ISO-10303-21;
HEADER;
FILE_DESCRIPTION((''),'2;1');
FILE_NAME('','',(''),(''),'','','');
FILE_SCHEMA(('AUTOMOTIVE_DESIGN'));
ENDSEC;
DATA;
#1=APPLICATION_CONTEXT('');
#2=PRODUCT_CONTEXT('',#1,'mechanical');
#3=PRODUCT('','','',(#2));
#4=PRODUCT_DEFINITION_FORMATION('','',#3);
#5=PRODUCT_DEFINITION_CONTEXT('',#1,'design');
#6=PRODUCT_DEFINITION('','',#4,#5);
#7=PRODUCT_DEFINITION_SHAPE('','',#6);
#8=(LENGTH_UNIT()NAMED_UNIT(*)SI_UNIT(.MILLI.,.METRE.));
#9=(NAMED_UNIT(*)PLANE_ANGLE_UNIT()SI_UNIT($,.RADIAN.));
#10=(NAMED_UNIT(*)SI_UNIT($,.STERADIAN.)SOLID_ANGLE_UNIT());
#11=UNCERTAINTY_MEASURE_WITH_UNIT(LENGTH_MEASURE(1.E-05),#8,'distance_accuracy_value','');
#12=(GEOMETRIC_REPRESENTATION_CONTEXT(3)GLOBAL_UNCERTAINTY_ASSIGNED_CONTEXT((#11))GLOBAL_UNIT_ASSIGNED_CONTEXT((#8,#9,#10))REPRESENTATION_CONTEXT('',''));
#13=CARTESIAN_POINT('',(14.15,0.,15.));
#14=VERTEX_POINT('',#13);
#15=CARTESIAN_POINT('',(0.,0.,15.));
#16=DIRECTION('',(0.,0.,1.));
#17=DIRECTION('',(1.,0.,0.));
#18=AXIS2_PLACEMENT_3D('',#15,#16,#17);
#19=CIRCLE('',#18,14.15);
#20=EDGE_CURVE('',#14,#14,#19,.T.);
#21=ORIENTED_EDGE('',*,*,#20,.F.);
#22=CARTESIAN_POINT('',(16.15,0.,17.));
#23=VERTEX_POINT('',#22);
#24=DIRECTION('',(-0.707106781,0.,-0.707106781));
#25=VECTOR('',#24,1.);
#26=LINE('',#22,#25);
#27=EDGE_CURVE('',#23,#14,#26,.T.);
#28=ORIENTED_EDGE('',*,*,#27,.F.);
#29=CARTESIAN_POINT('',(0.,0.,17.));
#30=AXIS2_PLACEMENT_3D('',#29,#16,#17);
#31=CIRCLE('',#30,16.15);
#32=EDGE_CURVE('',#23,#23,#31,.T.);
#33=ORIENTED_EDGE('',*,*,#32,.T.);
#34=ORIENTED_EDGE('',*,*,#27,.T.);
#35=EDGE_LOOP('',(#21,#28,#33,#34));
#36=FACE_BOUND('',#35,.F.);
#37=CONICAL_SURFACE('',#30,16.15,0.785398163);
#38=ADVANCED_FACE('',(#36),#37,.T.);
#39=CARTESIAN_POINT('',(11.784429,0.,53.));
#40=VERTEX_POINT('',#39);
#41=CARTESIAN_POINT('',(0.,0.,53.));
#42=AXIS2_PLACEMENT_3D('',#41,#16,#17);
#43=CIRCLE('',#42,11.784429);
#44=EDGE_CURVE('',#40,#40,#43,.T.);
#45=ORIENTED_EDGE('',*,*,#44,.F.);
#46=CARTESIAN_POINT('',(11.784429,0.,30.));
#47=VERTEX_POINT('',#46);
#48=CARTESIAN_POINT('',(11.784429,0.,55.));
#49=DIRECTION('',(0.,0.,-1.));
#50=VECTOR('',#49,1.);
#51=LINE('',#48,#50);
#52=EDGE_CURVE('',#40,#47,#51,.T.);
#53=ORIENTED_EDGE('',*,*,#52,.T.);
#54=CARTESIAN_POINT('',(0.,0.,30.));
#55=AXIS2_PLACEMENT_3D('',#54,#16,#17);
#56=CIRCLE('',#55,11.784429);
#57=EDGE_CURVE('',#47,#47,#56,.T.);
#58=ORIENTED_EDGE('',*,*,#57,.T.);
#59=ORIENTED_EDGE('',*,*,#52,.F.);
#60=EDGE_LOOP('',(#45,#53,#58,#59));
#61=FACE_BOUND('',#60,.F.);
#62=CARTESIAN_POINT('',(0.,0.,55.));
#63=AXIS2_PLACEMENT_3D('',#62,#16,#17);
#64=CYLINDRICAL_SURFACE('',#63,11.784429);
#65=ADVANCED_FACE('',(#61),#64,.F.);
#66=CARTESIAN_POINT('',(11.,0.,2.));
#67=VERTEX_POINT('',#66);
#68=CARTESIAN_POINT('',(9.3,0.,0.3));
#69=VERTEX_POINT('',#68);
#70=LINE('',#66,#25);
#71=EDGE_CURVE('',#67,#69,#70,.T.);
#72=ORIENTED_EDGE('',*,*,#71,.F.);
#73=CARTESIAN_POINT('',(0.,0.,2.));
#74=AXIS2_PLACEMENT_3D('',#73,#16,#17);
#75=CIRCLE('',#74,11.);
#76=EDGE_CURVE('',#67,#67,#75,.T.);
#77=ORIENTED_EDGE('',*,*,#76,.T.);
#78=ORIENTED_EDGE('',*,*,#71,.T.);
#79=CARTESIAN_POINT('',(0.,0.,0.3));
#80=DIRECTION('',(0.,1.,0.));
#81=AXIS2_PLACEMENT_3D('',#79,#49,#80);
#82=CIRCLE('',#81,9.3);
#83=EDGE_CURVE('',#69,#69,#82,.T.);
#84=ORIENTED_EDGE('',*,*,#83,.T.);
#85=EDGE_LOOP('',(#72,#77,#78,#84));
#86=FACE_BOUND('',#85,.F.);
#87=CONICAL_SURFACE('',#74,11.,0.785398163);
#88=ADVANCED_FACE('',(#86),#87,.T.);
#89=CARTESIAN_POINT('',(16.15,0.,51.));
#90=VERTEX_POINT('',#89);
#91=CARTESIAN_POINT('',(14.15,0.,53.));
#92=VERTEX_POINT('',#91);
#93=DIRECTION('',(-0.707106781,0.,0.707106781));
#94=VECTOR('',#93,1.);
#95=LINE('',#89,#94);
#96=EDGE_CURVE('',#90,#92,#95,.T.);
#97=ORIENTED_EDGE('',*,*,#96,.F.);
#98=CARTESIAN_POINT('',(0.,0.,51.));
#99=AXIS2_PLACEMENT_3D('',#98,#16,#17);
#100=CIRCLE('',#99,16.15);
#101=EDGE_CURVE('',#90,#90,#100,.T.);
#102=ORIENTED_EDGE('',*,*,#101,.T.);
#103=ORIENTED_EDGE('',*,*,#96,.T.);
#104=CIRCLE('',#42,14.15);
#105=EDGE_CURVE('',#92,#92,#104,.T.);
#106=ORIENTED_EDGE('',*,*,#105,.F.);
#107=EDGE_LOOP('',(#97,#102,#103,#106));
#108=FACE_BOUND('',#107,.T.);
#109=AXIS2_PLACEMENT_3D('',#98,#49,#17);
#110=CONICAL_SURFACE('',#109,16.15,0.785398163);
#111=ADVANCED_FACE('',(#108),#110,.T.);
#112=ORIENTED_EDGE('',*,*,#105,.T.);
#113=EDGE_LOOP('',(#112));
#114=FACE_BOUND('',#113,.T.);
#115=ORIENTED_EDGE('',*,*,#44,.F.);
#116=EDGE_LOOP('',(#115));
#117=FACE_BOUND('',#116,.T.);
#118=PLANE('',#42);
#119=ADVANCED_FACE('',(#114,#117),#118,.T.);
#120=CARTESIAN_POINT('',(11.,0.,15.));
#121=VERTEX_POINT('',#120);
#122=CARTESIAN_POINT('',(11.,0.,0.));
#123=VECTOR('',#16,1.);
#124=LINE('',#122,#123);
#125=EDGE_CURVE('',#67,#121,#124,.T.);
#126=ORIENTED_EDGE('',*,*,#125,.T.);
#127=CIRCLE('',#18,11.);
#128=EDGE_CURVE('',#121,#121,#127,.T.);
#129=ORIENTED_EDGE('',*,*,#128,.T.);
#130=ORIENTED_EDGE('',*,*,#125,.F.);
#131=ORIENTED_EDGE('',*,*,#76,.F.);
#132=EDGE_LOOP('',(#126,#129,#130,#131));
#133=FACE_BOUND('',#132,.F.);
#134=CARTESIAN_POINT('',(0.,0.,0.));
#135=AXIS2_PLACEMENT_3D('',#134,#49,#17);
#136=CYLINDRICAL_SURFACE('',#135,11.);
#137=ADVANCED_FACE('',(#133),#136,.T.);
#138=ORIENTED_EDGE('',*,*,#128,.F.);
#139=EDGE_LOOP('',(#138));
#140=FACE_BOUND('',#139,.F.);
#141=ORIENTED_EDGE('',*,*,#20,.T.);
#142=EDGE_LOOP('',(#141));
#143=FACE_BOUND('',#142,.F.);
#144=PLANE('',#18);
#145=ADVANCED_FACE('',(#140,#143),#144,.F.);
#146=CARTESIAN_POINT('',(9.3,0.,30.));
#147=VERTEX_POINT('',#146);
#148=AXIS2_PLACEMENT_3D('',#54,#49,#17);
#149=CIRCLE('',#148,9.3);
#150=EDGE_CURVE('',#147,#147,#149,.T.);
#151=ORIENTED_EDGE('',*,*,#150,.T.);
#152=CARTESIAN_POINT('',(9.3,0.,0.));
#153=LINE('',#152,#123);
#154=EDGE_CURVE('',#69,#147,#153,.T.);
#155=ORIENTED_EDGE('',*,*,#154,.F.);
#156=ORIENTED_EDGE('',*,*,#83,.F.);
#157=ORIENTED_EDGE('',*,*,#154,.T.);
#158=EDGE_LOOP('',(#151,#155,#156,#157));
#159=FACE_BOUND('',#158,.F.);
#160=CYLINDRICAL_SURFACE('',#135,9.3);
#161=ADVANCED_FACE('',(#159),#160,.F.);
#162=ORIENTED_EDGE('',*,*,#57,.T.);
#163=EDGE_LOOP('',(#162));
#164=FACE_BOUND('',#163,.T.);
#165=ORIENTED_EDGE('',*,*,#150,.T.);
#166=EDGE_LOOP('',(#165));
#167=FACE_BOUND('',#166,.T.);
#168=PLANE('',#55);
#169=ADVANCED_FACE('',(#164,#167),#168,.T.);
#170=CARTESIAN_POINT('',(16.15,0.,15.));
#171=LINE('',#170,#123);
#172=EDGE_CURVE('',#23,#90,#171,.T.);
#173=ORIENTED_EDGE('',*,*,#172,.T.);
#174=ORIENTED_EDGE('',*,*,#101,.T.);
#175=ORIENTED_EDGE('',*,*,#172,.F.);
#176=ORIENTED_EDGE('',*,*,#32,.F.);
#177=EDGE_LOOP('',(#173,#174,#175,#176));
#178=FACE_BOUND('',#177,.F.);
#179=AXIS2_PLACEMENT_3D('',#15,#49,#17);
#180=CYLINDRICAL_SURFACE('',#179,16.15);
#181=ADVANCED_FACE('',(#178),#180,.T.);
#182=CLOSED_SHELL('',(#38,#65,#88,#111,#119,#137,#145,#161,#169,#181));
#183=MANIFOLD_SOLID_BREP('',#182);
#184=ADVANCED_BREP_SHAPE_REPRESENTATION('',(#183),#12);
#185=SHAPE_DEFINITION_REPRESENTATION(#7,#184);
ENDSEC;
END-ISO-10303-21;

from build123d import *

# Parameters (mm, degrees)
F0_R     = 11
F1_DEPTH = 15
F2_R     = 16.15
F3_DEPTH = 38
F4_R     = 9.3
F5_DEPTH = 53.001
F7_R     = 11.7844294456
F8_DEPTH = 25


# Not quite as in the source:
# - a fillet or chamfer that OpenCascade refuses, or shapes differently, is made with other operations: its cross-section is extruded or revolved along the edge and cut away or added


with BuildPart() as f1:
    # F0 (on Top) → F1 (new body)
    with BuildSketch(Plane.XY):
        Circle(F0_R)
    extrude(amount=F1_DEPTH)

    # F2 (on face) → F3 (join)
    with BuildSketch(Plane.XY.offset(15)):
        Circle(F2_R)
    extrude(amount=F3_DEPTH)

    # F4 (on face) → F5 (cut, through all)
    with BuildSketch(Plane(origin=(0, 0, 0), x_dir=(1, 0, 0), z_dir=(0, 0, -1))):
        Circle(F4_R)
    extrude(amount=-F5_DEPTH, mode=Mode.SUBTRACT)

    # F7 (on offset) → F8 (cut)
    with BuildSketch(Plane.XY.offset(55)):
        Circle(F7_R)
    extrude(amount=-F8_DEPTH, mode=Mode.SUBTRACT)

    # F9: chamfer of 2 on 3 edges, made by hand

    # F9_s1 → F9_t2 (revolve, cut)
    with BuildSketch(Plane.XZ):
        Polygon((16.15, 51), (14.15, 53), (16.15, 53), align=None)
    revolve(axis=Axis((0, 0, 53), (0, 0, 1)), mode=Mode.SUBTRACT)

    # F9_s3 → F9_t4 (revolve, cut)
    with BuildSketch(Plane.XZ):
        Polygon((11, 2), (9, 0), (11, 0), align=None)
    revolve(axis=Axis((0, 0, 0), (0, 0, 1)), mode=Mode.SUBTRACT)

    # F9_s5 → F9_t6 (revolve, cut)
    with BuildSketch(Plane.XZ):
        Polygon((16.15, 17), (14.15, 15), (16.15, 15), align=None)
    revolve(axis=Axis((0, 0, 15), (0, 0, 1)), mode=Mode.SUBTRACT)


solid = f1.part
